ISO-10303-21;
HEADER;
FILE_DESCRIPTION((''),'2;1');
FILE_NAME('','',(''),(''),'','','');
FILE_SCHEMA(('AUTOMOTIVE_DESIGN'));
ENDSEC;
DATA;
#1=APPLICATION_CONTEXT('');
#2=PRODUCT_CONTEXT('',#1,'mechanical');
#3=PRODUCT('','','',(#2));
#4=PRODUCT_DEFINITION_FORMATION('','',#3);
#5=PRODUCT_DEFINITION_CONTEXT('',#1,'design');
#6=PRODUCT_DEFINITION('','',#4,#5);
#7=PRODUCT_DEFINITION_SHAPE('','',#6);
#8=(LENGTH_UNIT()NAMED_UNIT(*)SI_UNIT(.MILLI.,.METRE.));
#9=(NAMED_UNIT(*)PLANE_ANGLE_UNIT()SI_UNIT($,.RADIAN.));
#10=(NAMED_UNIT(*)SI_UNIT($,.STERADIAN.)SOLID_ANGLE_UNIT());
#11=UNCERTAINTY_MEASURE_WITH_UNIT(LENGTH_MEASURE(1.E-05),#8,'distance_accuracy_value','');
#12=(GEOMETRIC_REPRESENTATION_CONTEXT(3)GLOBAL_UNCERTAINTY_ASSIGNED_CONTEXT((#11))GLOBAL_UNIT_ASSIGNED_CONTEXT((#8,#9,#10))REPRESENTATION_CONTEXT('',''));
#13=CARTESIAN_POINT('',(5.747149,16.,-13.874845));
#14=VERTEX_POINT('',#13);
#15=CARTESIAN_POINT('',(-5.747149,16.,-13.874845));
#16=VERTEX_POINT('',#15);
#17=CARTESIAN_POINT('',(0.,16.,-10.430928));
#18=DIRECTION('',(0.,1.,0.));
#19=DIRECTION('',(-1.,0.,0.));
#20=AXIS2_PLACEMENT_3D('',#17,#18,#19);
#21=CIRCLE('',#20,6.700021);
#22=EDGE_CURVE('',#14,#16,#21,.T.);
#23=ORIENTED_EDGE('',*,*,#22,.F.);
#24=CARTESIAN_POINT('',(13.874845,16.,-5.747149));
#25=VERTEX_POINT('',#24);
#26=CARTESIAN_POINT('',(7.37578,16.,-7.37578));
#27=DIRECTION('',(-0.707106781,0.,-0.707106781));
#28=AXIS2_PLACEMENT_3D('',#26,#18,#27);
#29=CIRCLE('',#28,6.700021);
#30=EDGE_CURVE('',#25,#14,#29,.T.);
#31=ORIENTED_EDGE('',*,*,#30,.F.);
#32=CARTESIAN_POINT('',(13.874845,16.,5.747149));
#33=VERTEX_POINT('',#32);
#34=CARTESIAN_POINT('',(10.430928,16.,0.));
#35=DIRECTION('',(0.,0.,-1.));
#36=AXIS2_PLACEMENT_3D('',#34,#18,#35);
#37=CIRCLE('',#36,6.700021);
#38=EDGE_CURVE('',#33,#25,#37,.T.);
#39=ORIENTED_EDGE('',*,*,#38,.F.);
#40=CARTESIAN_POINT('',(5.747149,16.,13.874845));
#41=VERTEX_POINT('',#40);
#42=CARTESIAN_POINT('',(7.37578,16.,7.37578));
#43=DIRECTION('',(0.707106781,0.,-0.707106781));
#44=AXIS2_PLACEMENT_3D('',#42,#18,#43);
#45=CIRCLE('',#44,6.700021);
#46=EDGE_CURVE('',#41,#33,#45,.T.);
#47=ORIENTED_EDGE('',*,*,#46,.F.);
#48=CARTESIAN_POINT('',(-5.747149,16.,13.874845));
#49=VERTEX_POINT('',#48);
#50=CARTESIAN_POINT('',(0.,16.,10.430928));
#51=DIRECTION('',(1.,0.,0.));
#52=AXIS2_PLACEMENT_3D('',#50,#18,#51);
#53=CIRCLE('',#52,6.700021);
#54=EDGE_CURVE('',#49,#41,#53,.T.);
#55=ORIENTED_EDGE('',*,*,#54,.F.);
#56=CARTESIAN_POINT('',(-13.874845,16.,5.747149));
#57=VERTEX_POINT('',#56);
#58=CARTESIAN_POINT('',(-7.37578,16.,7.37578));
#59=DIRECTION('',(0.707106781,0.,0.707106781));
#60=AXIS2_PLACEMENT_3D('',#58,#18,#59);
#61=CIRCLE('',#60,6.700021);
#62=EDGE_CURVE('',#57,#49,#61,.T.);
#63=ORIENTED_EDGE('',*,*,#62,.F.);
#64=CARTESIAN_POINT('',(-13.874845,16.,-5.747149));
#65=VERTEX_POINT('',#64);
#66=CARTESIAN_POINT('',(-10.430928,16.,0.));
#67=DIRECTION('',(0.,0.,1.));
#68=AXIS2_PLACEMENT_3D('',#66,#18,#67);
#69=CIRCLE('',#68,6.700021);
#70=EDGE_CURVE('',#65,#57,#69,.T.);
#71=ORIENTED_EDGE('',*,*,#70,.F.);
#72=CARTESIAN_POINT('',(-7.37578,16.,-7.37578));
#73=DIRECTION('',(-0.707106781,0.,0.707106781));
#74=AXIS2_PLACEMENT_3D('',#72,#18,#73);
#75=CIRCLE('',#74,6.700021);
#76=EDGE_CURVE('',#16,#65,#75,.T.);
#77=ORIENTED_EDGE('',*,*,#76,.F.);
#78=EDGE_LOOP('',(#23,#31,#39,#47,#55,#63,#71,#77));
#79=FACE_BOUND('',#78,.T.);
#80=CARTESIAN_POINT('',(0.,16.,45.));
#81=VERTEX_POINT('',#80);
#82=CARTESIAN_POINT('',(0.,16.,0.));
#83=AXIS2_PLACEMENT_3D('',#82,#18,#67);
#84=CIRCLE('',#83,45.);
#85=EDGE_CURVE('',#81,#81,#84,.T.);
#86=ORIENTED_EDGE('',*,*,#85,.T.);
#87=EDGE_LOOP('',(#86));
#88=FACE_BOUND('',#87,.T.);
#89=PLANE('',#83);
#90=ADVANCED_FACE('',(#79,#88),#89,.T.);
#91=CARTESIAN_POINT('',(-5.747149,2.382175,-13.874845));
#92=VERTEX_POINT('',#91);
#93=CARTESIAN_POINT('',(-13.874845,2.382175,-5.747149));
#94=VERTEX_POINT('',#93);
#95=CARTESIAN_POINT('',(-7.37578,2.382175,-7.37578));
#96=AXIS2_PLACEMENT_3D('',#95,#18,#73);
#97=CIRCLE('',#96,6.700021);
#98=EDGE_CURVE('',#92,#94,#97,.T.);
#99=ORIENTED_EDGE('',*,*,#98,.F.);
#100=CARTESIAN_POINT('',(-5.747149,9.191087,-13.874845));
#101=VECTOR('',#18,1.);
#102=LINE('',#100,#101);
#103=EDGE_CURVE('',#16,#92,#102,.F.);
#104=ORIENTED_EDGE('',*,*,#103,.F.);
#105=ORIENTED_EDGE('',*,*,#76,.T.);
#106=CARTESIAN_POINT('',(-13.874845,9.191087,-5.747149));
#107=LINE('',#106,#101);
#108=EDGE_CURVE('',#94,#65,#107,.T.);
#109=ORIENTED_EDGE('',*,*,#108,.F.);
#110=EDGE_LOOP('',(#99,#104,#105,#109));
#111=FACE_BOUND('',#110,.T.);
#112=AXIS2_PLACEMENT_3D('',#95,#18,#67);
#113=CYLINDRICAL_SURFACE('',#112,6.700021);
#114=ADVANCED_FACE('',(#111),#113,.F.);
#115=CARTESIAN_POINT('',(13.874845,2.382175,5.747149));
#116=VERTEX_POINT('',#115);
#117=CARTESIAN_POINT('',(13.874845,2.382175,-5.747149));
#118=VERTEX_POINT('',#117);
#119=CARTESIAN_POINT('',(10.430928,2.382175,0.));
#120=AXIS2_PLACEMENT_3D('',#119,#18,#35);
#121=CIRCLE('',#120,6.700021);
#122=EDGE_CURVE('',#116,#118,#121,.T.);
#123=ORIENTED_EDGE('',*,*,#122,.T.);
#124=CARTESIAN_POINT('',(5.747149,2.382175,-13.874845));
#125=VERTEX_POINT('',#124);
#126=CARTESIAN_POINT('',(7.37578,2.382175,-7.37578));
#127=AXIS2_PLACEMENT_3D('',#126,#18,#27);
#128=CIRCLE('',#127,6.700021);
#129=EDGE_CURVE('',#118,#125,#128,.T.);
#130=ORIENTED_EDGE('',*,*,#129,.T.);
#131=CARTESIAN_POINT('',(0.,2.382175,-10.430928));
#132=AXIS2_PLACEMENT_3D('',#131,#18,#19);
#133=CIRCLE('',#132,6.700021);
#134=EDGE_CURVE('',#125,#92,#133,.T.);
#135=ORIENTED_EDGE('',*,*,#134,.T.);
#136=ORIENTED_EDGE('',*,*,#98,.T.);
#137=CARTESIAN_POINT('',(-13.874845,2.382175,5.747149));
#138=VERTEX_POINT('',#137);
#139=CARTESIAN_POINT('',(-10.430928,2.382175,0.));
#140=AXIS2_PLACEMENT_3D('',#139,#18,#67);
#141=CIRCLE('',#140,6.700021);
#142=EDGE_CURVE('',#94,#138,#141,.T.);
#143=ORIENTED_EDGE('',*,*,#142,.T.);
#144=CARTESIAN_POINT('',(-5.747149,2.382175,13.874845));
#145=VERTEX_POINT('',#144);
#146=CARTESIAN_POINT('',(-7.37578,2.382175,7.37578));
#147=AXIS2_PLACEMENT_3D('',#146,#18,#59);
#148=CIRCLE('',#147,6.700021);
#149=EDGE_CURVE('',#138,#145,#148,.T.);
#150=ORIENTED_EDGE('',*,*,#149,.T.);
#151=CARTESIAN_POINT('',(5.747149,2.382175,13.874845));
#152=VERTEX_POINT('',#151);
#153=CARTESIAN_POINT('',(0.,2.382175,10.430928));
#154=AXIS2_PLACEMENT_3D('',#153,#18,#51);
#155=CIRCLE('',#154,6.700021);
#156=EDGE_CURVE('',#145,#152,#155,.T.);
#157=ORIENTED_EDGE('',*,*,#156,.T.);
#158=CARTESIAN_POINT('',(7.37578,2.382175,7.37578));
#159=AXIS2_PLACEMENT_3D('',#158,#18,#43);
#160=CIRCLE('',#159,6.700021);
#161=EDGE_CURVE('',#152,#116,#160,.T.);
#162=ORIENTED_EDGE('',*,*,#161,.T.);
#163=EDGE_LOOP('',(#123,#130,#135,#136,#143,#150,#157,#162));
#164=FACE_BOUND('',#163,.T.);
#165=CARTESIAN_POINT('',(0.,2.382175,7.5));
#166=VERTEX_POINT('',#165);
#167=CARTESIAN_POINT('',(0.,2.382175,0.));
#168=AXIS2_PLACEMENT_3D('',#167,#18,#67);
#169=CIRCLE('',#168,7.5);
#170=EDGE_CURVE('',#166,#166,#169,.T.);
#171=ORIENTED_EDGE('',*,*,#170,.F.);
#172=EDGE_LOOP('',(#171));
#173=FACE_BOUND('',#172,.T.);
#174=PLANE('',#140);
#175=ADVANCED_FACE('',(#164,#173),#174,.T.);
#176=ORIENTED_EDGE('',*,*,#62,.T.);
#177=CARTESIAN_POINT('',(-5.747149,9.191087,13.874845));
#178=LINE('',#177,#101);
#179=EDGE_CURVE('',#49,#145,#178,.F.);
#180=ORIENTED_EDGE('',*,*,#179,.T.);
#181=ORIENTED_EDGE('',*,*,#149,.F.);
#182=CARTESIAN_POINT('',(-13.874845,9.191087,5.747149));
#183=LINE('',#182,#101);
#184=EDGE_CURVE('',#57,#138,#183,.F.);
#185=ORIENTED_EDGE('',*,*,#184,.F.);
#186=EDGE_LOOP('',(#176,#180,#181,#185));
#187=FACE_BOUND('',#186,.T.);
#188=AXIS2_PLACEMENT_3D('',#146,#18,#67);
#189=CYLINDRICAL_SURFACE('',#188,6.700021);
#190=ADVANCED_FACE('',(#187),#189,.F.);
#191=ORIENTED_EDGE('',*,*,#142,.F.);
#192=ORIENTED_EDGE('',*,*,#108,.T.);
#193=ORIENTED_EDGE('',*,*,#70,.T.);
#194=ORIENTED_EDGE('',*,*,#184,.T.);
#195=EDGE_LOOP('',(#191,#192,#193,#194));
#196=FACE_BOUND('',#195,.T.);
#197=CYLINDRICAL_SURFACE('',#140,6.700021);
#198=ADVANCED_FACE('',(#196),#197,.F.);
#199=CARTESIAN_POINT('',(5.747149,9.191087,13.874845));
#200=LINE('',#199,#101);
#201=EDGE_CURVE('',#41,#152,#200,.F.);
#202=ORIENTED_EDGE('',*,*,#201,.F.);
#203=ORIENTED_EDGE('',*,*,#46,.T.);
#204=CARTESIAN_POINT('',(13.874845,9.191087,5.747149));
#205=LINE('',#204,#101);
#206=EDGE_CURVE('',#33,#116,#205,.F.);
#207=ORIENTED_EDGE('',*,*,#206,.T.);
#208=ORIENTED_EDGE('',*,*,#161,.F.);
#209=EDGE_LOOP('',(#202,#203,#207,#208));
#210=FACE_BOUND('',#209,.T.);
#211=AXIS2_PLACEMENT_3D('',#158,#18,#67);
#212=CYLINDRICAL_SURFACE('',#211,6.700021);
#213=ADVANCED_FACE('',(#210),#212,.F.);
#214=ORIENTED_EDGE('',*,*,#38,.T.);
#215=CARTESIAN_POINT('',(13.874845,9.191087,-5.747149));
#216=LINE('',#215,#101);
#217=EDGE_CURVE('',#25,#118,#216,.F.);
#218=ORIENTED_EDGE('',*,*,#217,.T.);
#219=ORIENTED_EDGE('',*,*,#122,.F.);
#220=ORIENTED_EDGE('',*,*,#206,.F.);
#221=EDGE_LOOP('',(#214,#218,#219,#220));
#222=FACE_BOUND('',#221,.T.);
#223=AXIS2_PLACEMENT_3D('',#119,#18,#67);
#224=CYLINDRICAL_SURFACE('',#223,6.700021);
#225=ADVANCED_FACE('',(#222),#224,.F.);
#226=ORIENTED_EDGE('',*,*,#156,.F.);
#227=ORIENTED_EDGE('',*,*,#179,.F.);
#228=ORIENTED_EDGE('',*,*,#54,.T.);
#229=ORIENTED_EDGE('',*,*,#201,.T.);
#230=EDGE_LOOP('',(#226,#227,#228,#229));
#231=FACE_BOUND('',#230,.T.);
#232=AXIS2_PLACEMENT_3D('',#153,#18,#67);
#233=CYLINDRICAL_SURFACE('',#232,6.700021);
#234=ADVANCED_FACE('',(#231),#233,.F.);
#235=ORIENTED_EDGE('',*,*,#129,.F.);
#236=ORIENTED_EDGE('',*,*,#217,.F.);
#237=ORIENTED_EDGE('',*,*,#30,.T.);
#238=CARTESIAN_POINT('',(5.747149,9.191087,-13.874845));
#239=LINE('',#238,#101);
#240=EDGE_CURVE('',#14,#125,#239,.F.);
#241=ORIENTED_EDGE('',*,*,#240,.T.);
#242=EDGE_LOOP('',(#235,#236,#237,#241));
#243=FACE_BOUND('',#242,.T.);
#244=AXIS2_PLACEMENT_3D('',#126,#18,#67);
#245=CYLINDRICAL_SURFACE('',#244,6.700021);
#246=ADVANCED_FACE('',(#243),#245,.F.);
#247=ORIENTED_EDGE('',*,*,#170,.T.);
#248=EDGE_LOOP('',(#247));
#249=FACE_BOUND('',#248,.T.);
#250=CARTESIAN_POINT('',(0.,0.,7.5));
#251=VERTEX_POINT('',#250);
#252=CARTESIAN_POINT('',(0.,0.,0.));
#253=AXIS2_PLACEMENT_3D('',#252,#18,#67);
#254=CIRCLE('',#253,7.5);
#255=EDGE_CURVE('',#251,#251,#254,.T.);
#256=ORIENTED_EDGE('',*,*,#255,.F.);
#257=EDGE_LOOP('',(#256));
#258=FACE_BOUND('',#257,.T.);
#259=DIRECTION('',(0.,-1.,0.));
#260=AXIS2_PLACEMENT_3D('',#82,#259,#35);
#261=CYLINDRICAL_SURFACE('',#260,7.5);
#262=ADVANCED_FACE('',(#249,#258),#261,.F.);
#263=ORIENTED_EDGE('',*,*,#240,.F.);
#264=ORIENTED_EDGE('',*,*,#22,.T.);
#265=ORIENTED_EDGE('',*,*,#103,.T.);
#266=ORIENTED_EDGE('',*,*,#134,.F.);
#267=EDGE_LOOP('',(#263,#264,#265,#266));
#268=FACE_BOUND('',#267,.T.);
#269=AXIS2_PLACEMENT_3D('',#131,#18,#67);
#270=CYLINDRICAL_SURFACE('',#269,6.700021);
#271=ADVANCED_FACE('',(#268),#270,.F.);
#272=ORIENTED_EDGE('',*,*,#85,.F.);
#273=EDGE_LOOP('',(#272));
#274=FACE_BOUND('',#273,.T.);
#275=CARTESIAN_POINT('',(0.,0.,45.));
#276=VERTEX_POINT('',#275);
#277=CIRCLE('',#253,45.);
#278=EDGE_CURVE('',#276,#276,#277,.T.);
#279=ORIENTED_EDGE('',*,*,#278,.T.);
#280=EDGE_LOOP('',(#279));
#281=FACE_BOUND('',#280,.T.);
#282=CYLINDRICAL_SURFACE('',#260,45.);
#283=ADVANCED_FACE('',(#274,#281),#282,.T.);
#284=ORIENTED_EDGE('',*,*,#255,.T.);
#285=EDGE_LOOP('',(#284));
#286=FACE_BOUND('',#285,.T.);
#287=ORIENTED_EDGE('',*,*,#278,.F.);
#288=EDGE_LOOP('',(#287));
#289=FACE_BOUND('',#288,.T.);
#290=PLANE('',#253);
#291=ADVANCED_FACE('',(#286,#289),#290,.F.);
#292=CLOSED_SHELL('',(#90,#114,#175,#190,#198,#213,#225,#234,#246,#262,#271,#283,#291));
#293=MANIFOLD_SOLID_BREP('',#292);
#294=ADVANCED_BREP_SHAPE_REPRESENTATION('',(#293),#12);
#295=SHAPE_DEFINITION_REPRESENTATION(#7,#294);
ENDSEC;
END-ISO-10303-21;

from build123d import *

# Parameters (mm, degrees)
SKETCH1_R           = 45
BOSS_EXTRUDE1_DEPTH = 16
SKETCH2_R           = 7.5
CUT_EXTRUDE1_DEPTH  = 66.620118866
SKETCH3_R           = 6.700020908
CUT_EXTRUDE2_DEPTH  = 13.617825353
CIRPATTERN1_COUNT   = 8


with BuildPart() as part:
    # Sketch1 → Boss-Extrude1 (new body)
    with BuildSketch(Plane(origin=(0, 0, 0), x_dir=(1, 0, 0), z_dir=(0, 1, 0))):
        Circle(SKETCH1_R)
    extrude(amount=BOSS_EXTRUDE1_DEPTH)

    # Sketch2 → Cut-Extrude1 (cut, through all)
    with BuildSketch(Plane(origin=(0, 0, 0), x_dir=(1, 0, 0), z_dir=(0, 1, 0))):
        Circle(SKETCH2_R)
    extrude(amount=CUT_EXTRUDE1_DEPTH, mode=Mode.SUBTRACT)

    # Sketch3 → Cut-Extrude2 (cut)
    with BuildSketch(Plane(origin=(0, 16, 0), x_dir=(1, 0, 0), z_dir=(0, 1, 0))):
        with Locations((-10.430928244, 0)):
            Circle(SKETCH3_R)
    cut_extrude2 = extrude(amount=-CUT_EXTRUDE2_DEPTH, mode=Mode.SUBTRACT)

    # CirPattern1: Cut-Extrude2 ×8 about axis
    cirpattern1_axis = Axis((0, 0, 0), (0, 1, 0))
    for i in range(1, CIRPATTERN1_COUNT):
        add(cut_extrude2.rotate(cirpattern1_axis, i * 360 / CIRPATTERN1_COUNT), mode=Mode.SUBTRACT)


solid = part.part
